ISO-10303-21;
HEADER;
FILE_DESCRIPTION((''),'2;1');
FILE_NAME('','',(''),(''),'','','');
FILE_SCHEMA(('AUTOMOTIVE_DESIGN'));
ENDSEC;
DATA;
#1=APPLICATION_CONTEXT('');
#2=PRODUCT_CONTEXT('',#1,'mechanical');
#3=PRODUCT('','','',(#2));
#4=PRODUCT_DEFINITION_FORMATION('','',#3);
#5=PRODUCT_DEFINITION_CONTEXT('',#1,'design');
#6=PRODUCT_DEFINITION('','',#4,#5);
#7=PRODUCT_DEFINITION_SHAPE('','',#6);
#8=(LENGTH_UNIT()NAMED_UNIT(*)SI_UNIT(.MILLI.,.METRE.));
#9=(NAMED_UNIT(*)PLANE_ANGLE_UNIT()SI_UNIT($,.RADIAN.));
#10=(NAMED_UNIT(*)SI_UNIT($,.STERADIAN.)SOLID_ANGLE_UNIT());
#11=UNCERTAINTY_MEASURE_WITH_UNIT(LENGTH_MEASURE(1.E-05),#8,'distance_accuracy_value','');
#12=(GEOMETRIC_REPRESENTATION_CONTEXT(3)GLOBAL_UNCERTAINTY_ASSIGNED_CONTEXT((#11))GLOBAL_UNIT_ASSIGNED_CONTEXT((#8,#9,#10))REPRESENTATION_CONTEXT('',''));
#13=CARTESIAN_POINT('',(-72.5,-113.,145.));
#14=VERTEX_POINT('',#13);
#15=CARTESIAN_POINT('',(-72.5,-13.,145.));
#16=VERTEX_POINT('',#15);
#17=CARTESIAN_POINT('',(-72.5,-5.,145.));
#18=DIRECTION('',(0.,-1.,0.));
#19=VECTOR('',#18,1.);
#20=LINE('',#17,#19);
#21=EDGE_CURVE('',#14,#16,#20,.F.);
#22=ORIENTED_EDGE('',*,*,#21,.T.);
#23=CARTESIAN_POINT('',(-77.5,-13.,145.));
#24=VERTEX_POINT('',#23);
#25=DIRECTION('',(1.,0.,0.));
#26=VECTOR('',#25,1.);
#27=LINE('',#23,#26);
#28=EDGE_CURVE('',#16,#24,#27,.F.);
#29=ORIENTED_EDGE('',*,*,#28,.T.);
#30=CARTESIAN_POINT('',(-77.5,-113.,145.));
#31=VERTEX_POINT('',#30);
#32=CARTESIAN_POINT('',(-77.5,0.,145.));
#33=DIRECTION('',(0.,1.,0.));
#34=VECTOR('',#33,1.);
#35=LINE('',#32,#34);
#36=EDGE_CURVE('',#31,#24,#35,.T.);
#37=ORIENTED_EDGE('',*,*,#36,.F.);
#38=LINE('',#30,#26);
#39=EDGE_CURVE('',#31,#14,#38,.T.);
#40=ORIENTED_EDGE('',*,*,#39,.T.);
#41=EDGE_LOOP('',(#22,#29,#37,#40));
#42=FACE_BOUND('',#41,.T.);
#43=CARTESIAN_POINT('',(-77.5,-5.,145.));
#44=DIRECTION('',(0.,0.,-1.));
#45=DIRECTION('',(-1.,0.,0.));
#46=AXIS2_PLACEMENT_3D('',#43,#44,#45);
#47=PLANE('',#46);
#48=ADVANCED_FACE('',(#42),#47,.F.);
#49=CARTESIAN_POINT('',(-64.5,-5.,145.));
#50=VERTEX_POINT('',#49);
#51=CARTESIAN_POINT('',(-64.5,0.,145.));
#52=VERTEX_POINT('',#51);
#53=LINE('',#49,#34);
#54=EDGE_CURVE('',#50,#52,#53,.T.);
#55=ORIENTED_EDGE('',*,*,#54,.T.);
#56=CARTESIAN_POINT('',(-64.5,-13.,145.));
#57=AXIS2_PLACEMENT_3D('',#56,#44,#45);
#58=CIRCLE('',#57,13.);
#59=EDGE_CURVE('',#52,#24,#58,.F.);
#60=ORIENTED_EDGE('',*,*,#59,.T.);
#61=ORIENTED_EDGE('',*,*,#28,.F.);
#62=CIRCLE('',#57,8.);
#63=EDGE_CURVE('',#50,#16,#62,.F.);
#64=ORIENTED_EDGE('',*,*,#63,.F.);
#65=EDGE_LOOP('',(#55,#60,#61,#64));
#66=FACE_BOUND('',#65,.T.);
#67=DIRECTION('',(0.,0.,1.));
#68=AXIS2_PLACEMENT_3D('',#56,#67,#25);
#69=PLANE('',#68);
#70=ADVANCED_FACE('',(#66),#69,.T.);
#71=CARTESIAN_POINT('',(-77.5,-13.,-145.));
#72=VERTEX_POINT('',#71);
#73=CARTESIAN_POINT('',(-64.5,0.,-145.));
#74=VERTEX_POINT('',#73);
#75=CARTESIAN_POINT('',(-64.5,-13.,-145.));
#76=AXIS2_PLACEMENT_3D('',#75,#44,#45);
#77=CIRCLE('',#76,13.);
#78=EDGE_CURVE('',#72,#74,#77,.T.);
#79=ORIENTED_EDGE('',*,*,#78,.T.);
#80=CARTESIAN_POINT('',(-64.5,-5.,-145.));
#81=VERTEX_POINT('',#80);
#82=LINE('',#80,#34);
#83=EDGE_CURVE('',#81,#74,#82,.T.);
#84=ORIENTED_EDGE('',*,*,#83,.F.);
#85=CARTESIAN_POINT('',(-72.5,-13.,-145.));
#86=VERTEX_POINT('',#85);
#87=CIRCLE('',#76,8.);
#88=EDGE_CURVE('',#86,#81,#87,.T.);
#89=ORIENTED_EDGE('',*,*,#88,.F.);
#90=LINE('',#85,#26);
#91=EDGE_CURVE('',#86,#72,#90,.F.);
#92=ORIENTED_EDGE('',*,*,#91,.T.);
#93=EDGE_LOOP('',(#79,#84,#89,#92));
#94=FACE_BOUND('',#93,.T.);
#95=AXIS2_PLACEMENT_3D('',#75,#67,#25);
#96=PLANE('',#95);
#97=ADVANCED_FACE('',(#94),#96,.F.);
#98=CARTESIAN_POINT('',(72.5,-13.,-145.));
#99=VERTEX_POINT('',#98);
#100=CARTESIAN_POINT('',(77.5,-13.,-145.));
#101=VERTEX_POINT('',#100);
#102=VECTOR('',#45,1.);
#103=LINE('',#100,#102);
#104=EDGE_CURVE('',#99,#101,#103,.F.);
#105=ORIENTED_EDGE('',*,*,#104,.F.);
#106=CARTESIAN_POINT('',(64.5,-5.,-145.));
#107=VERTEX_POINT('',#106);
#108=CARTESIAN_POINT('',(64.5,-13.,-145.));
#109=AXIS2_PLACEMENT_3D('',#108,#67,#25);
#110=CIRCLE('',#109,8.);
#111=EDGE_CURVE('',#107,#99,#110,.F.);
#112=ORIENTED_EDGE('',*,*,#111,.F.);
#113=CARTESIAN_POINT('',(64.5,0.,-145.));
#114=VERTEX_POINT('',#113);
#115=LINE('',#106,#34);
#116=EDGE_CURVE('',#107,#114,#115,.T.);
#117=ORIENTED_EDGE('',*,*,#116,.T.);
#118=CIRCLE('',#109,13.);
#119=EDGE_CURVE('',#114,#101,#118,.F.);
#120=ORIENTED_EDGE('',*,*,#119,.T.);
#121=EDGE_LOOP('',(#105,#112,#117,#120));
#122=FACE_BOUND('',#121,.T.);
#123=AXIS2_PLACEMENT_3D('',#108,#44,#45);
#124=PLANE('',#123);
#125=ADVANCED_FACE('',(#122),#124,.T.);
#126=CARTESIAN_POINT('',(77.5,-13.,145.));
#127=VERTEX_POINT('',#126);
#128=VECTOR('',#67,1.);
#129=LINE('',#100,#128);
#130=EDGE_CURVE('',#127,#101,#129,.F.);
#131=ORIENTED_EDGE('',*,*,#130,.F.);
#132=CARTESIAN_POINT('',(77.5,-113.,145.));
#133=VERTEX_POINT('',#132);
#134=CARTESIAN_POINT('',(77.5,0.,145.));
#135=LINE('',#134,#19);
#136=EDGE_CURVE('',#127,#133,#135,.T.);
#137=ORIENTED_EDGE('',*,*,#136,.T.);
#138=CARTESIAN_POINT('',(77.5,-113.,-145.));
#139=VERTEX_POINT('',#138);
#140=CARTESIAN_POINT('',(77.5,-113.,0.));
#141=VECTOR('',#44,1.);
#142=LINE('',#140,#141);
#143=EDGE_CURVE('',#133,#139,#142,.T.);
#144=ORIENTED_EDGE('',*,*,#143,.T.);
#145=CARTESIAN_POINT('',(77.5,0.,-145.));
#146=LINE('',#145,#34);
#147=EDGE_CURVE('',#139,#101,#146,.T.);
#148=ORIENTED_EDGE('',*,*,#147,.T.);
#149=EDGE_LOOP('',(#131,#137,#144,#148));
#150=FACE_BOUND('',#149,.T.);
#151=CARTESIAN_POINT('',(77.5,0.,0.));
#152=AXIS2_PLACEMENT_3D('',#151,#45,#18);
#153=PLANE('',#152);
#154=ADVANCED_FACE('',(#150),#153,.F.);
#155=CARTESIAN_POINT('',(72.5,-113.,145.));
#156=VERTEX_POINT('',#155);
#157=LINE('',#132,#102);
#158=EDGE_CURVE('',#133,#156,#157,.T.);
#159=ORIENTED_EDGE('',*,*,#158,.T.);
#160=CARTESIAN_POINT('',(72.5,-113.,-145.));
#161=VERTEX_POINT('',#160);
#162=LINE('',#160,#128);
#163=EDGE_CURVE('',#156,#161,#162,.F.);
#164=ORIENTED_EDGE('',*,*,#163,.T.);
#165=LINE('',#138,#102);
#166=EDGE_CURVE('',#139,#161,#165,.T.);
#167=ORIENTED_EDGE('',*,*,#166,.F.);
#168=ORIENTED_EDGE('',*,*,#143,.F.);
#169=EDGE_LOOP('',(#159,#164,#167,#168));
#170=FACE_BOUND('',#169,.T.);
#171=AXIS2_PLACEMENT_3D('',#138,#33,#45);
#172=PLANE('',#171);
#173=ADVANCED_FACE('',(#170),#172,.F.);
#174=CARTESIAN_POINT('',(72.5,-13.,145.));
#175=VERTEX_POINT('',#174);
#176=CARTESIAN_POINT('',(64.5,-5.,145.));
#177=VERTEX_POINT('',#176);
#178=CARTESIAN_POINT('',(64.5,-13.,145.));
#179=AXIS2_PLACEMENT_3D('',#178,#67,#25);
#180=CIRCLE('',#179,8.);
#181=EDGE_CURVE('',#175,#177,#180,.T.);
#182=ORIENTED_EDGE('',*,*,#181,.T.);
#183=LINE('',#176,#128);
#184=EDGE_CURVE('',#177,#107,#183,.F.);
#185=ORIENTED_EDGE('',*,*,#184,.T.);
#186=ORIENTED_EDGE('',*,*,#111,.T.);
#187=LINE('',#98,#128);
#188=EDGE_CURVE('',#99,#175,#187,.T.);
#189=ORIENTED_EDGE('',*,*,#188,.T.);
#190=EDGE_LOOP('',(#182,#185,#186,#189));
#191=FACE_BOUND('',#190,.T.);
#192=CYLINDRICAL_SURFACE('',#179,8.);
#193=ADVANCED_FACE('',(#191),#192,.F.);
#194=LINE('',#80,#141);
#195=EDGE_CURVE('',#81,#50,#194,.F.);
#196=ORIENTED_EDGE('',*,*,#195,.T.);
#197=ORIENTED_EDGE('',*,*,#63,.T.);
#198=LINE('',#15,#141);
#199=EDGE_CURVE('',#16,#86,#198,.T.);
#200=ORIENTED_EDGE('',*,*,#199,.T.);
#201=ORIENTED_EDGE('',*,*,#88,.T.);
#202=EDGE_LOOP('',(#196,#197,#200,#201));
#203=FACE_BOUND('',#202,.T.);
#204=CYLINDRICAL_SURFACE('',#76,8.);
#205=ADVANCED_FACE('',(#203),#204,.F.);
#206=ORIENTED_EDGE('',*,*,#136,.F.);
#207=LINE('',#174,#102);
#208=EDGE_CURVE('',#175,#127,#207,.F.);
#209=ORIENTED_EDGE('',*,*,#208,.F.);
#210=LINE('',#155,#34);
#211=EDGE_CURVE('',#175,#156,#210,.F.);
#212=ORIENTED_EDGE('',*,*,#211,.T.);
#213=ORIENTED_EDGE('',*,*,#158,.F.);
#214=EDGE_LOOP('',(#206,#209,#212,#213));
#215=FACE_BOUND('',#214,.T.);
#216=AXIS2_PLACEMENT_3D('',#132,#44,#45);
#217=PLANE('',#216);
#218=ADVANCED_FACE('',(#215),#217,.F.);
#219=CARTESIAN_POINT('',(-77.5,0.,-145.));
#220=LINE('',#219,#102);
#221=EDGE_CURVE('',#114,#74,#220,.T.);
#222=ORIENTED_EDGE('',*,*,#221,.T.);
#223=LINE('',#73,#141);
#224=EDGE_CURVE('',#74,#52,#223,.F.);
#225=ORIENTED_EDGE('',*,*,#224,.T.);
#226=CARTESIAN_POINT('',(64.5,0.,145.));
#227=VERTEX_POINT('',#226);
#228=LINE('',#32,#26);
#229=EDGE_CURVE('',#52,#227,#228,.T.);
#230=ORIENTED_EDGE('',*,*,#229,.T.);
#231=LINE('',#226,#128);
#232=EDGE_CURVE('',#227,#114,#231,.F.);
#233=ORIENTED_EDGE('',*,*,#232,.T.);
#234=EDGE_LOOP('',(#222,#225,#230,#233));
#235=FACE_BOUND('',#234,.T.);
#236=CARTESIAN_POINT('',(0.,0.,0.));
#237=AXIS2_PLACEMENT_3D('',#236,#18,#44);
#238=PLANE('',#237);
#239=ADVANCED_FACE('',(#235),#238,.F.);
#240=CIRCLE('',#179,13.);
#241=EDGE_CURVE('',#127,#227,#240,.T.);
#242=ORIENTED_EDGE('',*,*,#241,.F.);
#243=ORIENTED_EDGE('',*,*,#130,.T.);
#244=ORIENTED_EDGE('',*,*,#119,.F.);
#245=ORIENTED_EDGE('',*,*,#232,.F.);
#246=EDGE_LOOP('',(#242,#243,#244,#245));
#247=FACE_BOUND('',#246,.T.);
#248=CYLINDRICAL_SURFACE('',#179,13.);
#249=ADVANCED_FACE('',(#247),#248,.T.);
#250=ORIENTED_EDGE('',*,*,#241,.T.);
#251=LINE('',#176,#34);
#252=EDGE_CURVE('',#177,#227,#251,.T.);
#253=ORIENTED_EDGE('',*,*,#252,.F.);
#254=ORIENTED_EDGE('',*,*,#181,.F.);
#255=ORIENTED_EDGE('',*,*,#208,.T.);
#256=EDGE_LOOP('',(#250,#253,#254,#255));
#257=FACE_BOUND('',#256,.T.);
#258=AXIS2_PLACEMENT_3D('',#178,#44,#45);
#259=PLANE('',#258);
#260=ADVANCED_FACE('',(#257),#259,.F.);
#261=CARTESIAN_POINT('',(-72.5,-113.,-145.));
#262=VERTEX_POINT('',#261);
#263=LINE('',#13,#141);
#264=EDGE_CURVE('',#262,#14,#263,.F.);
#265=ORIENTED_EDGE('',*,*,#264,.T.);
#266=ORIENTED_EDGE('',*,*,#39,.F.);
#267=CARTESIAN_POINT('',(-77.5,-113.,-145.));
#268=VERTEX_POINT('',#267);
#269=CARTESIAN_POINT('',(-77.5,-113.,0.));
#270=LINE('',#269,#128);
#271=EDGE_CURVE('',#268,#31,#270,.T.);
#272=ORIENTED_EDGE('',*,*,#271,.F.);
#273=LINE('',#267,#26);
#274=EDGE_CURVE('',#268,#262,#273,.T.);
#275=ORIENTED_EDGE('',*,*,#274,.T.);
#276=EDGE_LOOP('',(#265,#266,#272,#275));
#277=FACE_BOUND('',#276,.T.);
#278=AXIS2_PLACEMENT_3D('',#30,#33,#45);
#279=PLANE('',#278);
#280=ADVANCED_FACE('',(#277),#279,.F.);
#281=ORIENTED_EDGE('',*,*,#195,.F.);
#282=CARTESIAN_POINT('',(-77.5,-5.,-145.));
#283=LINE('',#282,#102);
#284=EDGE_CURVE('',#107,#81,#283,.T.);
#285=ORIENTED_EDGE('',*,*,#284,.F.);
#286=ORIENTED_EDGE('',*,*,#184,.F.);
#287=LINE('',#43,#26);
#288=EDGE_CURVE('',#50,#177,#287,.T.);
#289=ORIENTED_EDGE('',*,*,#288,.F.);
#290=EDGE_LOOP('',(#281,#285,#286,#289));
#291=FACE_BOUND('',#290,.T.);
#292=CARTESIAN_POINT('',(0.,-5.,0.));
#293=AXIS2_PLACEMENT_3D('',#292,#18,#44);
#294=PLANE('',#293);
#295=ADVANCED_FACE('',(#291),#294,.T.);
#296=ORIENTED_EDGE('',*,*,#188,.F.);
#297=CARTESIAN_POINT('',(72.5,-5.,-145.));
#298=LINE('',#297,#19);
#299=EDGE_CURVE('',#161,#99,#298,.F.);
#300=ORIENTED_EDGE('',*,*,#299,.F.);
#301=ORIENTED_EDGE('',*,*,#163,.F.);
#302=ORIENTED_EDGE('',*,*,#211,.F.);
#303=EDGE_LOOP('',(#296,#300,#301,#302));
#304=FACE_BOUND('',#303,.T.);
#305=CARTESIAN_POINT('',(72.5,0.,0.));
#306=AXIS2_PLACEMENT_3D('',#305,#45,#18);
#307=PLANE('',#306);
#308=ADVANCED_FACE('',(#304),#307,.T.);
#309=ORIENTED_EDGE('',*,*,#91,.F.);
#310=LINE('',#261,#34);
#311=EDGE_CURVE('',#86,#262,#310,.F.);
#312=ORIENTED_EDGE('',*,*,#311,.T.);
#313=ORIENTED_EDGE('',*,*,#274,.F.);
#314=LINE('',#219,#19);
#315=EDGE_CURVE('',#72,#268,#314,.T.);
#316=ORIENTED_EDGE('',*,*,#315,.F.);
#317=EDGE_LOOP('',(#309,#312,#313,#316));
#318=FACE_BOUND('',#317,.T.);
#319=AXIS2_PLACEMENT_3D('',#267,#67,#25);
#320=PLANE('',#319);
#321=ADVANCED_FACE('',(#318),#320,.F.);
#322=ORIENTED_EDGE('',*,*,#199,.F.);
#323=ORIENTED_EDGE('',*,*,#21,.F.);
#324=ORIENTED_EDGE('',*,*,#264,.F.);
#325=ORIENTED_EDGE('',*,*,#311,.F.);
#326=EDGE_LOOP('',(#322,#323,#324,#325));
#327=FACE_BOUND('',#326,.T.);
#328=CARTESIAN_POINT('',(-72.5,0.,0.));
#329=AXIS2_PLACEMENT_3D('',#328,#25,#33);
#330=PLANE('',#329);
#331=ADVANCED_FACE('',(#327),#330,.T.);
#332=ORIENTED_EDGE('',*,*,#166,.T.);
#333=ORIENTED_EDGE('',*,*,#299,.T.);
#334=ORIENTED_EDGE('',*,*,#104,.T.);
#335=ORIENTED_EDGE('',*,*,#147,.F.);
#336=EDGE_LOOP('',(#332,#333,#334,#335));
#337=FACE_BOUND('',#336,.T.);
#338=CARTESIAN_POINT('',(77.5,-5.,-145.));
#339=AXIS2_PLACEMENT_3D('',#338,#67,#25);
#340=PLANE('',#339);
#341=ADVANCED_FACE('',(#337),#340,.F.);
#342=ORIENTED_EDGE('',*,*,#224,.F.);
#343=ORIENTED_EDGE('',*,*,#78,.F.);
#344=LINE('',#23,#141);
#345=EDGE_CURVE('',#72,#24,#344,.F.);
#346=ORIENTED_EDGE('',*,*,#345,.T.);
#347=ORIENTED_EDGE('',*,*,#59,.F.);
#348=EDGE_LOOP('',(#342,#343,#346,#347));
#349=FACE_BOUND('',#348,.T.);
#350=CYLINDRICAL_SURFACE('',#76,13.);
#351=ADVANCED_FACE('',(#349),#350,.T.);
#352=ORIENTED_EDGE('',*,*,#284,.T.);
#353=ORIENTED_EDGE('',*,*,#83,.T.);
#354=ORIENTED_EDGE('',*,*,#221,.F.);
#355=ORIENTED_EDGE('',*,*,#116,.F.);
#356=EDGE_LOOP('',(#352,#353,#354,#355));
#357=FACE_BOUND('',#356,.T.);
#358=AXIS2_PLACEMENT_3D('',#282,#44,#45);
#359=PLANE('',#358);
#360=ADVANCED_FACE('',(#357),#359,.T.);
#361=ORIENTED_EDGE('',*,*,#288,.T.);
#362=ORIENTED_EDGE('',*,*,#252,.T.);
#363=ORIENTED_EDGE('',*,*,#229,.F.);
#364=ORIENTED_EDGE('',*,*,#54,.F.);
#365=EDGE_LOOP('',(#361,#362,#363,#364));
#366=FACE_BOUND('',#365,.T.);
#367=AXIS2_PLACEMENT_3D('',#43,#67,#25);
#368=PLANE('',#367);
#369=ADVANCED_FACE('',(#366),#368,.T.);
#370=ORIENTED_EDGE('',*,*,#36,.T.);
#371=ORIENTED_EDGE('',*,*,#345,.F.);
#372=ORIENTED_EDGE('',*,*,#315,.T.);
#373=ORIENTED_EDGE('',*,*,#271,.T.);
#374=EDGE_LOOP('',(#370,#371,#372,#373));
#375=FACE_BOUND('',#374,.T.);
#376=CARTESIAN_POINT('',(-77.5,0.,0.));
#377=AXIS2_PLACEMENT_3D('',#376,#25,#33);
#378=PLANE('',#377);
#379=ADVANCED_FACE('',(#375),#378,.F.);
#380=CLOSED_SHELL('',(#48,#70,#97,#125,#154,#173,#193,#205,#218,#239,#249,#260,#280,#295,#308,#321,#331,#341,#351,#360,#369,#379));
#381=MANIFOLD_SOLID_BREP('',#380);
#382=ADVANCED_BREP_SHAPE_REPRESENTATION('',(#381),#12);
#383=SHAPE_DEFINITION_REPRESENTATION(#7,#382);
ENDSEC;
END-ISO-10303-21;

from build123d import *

# Parameters (mm, degrees)
SKETCH1_W                      = 155
SKETCH1_H                      = 290
BASE_FLANGE1_DEPTH             = 5
EDGE_FLANGE1_STRIP_W           = 36
EDGE_FLANGE1_STRIP_H           = 5
EDGE_FLANGE1_STRIP_CUT_DEPTH   = 290
EDGE_FLANGE1_STRIP_2_W         = 36
EDGE_FLANGE1_STRIP_2_H         = 5
EDGE_FLANGE1_STRIP_CUT_2_DEPTH = 290
EDGE_FLANGE1_DEPTH             = 290
EDGE_FLANGE1_BEND_DEPTH        = 290


# Sheet-metal steps are written as plain solids
with BuildPart() as part:
    # Sketch1 → Base-Flange1 (new body)
    with BuildSketch(Plane(origin=(0, 0, 0), x_dir=(1, 0, 0), z_dir=(0, 1, 0))):
        Rectangle(SKETCH1_W, SKETCH1_H)
    extrude(amount=-BASE_FLANGE1_DEPTH)

    # Edge-Flange1 strip (across the edge) → Edge-Flange1 strip cut (cut)
    with BuildSketch(Plane(origin=(77.5, -5, -145), x_dir=(-1, 0, 0), z_dir=(0, 0, 1))):
        with Locations((-5, -2.5)):
            Rectangle(EDGE_FLANGE1_STRIP_W, EDGE_FLANGE1_STRIP_H)
    extrude(amount=EDGE_FLANGE1_STRIP_CUT_DEPTH, mode=Mode.SUBTRACT)

    # Edge-Flange1 strip 2 (across the edge) → Edge-Flange1 strip cut 2 (cut)
    with BuildSketch(Plane(origin=(-77.5, -5, 145), x_dir=(1, 0, 0), z_dir=(0, 0, -1))):
        with Locations((-5, -2.5)):
            Rectangle(EDGE_FLANGE1_STRIP_2_W, EDGE_FLANGE1_STRIP_2_H)
    extrude(amount=EDGE_FLANGE1_STRIP_CUT_2_DEPTH, mode=Mode.SUBTRACT)

    # Edge-Flange1 section (across the edge) → Edge-Flange1 (add)
    with BuildSketch(Plane(origin=(77.5, -5, -145), x_dir=(-1, 0, 0), z_dir=(0, 0, 1))):
        with BuildLine():
            Line((0, 8), (0, 108))
            Line((0, 108), (5, 108))
            Line((5, 108), (5, 8))
            ThreePointArc((5, 8), (7.343145751, 2.343145751), (13, 0))
            Line((13, 0), (13, -5))
            ThreePointArc((13, -5), (3.807611845, -1.192388155), (0, 8))
        make_face()
    extrude(amount=EDGE_FLANGE1_DEPTH)

    # Edge-Flange1 section 2 (across the edge) → Edge-Flange1 bend (add)
    with BuildSketch(Plane(origin=(-77.5, -5, 145), x_dir=(1, 0, 0), z_dir=(0, 0, -1))):
        with BuildLine():
            Line((0, 8), (0, 108))
            Line((0, 108), (5, 108))
            Line((5, 108), (5, 8))
            ThreePointArc((5, 8), (7.343145751, 2.343145751), (13, 0))
            Line((13, 0), (13, -5))
            ThreePointArc((13, -5), (3.807611845, -1.192388155), (0, 8))
        make_face()
    extrude(amount=EDGE_FLANGE1_BEND_DEPTH)


solid = part.part
